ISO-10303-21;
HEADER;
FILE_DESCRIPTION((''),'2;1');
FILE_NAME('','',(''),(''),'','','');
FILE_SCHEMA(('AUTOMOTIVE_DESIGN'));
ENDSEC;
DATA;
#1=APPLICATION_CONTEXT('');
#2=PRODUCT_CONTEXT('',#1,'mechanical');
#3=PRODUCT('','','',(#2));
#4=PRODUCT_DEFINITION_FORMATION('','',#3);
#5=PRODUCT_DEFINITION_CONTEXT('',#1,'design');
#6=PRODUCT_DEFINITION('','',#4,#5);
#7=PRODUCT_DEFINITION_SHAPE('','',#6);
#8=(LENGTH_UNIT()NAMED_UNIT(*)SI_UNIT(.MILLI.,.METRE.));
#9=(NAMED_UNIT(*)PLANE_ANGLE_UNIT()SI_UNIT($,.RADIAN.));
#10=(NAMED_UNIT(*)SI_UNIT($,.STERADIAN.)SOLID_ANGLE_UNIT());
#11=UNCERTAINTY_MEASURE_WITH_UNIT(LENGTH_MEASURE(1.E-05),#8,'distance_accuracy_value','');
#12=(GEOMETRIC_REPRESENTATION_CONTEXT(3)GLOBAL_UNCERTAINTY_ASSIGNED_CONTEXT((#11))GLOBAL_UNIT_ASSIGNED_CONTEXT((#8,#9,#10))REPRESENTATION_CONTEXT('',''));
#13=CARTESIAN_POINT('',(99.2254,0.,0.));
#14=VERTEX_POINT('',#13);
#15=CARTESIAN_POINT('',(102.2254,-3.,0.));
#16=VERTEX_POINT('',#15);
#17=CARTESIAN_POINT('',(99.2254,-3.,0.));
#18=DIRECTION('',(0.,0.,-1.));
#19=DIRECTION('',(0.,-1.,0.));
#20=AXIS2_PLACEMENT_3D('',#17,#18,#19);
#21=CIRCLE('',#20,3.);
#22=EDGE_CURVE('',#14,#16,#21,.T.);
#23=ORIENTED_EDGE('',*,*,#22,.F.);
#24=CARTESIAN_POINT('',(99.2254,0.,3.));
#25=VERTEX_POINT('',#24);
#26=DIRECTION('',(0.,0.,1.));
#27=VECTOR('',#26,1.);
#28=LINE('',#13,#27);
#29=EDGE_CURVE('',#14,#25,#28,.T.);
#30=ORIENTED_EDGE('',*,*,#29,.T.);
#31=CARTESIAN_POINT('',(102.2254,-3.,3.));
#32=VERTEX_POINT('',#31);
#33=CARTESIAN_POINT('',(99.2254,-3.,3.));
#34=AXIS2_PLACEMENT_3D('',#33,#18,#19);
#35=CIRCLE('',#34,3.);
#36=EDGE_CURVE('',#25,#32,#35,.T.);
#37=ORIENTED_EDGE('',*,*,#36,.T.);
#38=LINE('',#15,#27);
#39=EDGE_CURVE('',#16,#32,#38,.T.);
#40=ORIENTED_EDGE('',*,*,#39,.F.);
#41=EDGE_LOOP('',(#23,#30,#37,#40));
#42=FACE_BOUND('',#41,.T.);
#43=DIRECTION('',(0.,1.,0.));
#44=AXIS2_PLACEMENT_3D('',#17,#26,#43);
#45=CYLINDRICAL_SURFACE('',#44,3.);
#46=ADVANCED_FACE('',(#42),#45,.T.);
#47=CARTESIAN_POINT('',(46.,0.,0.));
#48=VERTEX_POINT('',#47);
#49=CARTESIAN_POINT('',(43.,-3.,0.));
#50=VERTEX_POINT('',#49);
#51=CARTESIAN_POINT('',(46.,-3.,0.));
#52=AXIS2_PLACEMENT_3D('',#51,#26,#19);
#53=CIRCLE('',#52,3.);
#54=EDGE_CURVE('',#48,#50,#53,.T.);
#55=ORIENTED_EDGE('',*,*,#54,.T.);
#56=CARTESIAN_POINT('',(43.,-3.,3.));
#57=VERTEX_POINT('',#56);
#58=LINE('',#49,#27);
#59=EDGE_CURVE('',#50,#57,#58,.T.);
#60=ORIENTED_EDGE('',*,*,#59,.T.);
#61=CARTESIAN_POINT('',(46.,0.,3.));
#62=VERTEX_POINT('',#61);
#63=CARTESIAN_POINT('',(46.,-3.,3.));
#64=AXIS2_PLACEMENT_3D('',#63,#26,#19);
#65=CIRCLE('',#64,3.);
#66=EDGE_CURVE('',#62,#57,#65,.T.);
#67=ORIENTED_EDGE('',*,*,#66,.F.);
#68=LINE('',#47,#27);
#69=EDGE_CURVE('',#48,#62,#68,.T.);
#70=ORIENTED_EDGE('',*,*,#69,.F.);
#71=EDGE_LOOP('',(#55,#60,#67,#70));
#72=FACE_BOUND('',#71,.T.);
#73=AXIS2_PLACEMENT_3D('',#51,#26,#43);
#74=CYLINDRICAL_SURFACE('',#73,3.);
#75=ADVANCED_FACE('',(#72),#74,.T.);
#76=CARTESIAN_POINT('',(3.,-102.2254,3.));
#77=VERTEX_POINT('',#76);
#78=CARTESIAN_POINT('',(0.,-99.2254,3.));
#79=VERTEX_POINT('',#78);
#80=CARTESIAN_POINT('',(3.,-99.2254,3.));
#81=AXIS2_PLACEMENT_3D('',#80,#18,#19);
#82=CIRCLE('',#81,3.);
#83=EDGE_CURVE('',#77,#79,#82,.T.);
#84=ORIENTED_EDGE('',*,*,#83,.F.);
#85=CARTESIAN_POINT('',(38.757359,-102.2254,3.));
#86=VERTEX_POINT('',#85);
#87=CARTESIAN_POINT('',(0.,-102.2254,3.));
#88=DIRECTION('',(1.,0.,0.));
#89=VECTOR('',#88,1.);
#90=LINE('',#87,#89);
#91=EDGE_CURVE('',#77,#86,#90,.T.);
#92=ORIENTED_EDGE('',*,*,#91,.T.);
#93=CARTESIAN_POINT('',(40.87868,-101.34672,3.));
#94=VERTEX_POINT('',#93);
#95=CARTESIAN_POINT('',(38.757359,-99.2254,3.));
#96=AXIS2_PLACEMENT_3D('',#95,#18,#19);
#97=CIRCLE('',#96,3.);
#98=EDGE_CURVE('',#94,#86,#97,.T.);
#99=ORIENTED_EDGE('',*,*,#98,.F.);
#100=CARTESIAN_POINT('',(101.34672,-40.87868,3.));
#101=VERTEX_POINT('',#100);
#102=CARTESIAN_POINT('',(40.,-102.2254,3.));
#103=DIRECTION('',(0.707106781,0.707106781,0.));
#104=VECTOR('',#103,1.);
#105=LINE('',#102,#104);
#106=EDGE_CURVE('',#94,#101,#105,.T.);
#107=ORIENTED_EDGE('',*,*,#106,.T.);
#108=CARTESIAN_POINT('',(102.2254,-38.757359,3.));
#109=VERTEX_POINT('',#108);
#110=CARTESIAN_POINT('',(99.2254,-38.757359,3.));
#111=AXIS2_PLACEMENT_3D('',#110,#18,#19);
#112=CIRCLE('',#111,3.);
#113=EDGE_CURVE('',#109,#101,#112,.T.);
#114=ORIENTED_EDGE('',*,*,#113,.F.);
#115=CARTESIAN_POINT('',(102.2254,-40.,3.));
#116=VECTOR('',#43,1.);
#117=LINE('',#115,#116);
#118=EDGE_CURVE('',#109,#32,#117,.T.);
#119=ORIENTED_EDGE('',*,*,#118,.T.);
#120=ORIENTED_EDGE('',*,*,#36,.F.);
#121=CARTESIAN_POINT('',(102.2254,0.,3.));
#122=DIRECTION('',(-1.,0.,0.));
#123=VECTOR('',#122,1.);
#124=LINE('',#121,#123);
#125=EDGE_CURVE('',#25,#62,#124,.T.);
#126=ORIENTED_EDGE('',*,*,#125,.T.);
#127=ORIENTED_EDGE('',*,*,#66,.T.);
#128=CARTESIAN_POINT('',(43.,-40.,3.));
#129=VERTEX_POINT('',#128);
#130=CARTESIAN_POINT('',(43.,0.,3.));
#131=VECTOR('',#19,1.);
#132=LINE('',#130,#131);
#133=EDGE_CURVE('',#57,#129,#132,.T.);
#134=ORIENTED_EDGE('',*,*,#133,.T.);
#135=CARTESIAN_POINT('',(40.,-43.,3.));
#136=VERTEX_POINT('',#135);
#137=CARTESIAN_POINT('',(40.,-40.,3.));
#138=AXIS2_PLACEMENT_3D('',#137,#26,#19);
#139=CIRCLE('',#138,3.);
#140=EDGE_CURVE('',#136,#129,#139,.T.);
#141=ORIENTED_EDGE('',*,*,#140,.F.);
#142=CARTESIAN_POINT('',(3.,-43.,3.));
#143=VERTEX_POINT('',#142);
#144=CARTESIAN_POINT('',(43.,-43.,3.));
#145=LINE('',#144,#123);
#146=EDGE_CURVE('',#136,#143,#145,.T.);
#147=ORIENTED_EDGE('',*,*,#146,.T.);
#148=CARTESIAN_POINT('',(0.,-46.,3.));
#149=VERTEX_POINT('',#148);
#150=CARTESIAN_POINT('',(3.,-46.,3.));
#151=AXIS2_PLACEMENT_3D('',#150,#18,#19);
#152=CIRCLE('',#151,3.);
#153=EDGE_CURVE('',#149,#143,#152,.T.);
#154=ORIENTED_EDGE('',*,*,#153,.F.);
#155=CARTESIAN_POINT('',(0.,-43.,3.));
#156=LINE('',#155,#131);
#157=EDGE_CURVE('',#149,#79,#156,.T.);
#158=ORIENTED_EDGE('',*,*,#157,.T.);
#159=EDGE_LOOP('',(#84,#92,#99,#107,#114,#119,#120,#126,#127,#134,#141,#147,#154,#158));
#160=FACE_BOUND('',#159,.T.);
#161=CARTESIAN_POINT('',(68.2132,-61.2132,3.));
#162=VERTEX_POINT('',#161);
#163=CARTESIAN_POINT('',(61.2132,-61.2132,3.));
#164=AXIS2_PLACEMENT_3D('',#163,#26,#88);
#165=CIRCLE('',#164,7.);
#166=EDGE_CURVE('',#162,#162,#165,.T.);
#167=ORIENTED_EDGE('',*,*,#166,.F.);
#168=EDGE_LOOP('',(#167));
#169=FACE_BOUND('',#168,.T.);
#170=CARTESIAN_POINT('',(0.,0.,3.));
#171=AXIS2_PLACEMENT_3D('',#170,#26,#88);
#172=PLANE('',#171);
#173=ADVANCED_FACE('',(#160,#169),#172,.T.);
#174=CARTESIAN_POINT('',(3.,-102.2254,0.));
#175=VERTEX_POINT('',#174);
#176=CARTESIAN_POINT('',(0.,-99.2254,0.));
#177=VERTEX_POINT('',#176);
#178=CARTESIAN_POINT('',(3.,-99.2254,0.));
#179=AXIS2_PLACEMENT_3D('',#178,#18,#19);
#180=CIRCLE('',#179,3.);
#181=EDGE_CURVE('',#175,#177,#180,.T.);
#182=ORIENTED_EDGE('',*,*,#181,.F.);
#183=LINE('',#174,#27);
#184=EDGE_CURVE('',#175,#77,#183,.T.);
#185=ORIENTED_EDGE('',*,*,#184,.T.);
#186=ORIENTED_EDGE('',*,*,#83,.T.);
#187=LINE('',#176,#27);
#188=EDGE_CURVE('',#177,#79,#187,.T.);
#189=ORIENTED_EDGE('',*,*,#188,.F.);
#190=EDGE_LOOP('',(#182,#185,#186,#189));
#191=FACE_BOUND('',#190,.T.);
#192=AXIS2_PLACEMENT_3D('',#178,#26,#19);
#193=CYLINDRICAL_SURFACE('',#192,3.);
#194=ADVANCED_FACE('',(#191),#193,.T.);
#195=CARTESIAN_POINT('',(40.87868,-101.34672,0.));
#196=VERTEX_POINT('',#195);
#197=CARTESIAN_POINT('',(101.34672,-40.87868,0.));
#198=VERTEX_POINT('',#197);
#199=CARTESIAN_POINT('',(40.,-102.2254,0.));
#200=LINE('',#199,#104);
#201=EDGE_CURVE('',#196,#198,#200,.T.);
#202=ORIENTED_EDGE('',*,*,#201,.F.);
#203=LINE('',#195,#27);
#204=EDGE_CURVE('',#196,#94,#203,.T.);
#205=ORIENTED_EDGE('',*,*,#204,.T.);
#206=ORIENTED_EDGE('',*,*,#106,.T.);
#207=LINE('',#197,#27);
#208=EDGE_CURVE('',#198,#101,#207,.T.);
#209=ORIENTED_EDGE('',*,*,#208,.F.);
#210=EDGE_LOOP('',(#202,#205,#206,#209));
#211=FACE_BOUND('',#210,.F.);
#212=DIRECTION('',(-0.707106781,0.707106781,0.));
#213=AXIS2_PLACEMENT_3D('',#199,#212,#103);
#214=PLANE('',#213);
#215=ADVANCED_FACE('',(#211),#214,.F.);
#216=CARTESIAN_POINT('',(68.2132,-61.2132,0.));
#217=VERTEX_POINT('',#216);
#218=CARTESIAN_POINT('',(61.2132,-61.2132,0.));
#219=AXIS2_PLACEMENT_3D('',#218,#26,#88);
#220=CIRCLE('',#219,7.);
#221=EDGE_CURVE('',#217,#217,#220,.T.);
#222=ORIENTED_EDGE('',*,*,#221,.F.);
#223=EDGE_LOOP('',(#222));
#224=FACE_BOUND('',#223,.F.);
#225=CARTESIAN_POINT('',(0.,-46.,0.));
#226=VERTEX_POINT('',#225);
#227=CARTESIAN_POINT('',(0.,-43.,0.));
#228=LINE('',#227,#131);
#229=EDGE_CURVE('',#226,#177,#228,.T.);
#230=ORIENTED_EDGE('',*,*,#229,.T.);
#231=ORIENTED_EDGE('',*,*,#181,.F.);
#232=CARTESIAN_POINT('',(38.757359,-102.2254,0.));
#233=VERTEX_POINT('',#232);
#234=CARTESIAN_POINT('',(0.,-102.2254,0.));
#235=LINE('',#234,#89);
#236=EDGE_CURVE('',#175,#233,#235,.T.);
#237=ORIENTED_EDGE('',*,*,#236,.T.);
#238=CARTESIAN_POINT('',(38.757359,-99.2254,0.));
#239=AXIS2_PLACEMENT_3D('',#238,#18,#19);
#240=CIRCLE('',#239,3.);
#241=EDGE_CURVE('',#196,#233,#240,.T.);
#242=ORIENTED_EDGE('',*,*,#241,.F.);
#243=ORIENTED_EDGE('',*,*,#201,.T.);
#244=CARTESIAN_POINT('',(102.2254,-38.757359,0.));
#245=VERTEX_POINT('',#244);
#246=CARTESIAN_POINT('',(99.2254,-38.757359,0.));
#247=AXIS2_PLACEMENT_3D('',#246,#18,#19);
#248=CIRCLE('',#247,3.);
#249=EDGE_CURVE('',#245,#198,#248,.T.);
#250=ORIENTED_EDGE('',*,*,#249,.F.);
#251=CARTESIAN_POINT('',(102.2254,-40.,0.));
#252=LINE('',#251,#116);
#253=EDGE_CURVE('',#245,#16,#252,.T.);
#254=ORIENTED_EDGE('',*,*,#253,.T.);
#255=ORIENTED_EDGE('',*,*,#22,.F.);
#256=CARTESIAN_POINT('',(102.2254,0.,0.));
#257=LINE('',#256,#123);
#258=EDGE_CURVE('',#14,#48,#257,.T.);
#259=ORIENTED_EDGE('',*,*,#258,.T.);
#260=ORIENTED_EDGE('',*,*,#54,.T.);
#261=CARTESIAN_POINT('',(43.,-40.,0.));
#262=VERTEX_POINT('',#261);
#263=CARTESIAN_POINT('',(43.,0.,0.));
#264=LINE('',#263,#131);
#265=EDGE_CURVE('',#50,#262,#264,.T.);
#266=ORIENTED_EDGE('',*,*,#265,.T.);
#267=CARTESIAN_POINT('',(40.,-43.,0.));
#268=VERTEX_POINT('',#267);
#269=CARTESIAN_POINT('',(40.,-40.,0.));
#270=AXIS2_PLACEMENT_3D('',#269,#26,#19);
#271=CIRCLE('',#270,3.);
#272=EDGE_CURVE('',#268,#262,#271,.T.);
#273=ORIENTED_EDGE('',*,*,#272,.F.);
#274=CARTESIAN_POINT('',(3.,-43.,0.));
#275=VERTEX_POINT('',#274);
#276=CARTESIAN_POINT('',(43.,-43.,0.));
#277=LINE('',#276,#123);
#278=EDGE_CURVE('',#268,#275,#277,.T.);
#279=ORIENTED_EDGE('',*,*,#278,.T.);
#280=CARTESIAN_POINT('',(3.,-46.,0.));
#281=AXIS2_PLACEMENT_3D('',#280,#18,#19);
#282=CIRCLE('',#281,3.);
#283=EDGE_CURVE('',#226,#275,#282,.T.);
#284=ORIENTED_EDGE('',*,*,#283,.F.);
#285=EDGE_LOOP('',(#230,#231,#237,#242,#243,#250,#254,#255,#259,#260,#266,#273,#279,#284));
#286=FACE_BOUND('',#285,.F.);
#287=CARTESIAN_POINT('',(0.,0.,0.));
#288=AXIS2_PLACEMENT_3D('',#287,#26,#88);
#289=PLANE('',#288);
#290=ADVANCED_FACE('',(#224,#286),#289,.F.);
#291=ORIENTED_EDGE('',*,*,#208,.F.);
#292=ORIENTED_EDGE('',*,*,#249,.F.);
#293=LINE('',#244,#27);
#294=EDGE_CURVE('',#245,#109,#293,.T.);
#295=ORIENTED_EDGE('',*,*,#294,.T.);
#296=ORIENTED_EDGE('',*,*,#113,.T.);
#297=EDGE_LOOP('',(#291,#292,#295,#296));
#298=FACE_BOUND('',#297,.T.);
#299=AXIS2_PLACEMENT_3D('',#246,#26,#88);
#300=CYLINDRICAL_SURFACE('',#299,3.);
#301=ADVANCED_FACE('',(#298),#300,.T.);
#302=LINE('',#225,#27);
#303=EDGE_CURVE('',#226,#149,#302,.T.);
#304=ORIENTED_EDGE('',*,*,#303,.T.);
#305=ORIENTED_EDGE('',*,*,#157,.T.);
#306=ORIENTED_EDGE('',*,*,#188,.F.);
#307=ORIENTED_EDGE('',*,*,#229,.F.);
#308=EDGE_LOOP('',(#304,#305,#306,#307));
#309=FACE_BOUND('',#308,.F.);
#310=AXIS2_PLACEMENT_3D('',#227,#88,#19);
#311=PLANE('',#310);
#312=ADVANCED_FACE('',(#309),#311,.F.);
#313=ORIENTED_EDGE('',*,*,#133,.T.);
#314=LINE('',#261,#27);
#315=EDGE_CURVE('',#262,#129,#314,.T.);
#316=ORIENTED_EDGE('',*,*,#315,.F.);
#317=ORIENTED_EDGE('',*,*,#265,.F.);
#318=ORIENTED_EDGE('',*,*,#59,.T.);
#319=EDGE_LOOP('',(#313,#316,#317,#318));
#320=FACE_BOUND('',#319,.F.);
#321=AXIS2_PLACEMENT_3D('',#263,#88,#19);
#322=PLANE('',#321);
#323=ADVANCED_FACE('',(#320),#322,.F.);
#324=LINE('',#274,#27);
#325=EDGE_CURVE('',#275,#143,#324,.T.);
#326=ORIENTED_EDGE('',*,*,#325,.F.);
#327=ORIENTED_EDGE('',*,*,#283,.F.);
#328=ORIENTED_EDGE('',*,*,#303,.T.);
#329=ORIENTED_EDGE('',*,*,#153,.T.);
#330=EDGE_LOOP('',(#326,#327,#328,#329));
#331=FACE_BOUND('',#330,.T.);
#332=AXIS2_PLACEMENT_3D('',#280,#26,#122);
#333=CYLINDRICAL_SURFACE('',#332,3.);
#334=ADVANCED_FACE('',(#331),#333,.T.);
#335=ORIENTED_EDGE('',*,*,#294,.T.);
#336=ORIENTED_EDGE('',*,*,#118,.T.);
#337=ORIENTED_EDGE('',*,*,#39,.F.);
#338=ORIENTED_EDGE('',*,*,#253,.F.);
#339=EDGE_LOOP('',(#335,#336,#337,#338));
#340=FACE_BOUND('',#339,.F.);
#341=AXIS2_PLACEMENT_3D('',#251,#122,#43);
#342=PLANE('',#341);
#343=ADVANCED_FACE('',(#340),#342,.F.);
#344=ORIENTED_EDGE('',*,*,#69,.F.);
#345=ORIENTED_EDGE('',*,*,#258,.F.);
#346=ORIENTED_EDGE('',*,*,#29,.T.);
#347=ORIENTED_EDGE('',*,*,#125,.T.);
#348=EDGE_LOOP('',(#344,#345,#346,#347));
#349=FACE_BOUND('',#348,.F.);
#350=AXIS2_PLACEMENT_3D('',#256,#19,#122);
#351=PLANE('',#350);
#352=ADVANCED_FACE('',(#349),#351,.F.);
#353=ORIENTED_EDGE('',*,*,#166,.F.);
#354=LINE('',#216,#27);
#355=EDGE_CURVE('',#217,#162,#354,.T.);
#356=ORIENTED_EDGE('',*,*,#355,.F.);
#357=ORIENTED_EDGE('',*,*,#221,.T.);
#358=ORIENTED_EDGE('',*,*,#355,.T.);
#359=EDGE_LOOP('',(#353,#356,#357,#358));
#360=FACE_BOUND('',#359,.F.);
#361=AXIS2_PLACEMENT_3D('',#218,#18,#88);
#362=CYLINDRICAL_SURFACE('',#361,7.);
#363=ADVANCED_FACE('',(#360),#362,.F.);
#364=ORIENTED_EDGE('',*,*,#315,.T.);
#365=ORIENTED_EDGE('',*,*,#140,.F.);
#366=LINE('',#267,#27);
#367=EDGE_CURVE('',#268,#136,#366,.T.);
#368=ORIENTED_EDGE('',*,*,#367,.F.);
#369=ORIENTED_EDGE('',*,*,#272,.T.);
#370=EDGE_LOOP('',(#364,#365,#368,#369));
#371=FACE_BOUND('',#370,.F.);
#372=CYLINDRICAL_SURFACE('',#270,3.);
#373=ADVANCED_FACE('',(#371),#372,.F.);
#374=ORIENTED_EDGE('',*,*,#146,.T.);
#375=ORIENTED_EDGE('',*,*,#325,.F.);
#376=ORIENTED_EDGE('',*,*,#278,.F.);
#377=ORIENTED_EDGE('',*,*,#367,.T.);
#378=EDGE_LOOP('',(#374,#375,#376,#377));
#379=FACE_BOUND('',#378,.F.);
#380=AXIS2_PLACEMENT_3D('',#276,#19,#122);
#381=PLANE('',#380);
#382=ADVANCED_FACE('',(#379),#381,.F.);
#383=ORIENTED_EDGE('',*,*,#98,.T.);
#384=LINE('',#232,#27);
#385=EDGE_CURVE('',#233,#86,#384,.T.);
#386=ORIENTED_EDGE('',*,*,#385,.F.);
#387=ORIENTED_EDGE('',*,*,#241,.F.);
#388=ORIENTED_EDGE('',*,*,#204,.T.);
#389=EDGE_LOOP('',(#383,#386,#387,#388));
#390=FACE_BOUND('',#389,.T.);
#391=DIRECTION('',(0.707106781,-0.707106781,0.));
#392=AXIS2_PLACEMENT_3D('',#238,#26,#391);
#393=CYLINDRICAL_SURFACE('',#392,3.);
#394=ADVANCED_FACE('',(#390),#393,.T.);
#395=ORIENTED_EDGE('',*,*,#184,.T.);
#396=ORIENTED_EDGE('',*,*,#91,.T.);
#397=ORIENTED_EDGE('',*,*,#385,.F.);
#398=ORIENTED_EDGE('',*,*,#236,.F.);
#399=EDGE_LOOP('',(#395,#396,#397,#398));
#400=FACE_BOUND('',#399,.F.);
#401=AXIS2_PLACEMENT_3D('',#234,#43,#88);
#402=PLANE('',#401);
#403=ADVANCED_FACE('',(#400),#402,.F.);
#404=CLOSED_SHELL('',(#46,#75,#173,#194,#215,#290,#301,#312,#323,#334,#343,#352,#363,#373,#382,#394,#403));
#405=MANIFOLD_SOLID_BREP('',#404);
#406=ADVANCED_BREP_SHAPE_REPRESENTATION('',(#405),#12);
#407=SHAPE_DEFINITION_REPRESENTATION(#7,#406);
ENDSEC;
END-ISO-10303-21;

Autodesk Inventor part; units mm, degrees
ref_plane "YZ Plane" through (0, 0, 0) normal (1, 0, 0) x (0, 1, 0)
ref_plane "XZ Plane" through (0, 0, 0) normal (0, 1, 0) x (-1, 0, 0)
ref_plane "XY Plane" through (0, 0, 0) normal (0, 0, 1) x (1, 0, 0)
sketch "Sketch2" plane through (0, 0, 0) normal (0, 0, 1) x (1, 0, 0)
  line L0 (0, 0) -> (40, 0) construction
  line L1 (40, 0) -> (40, -40) construction
  line L2 (40, -40) -> (0, -40) construction
  line L3 (0, -40) -> (0, 0) construction
  line L4 (43, 0) -> (43, -43)
  line L5 (43, -43) -> (0, -43)
  line L6 (0, -43) -> (0, -102.2254)
  line L7 (0, -102.2254) -> (40, -102.2254)
  line L8 (40, -102.2254) -> (102.2254, -40)
  line L9 (102.2254, -40) -> (102.2254, 0)
  line L10 (102.2254, 0) -> (43, 0)
  line L11 (43, -43) -> (71.1127, -71.1127) construction
  circle A0 centre (61.2132, -61.2132) radius 7
  dimension "d7" = 40
  dimension "d8" = 40
  dimension "d9" = 3
  dimension "d10" = 3
  dimension "d11" = 14
  dimension "d12" = 30
  dimension "d13" = 14
extrude "Plate2" add sketch "Sketch2" along normal blind 3
fillet "Corner Round3" radius 3 7 edges at (0, -102.2254, 1.5) (0, -43, 1.5) (43, -43, 1.5) (43, 0, 1.5) (102.2254, 0, 1.5) (102.2254, -40, 1.5) (40, -102.2254, 1.5)
feature "Corner Round4" [suppressed]
sketch "Sketch3" plane through (43, -103.468, 3) normal (-0.7071068, 0.7071068, 0) x (-0.7071068, -0.7071068, 0)
  line L0 (-85.5147, 0) -> (0, 0)
  line L1 (0, 0) -> (0, -20)
  line L2 (0, -20) -> (-85.5147, -20)
  line L3 (-85.5147, -20) -> (-85.5147, 0)
equation "\"d8\" = d7"
equation "\"d10\" = d9"
equation "\"d13\" = d11"
equation "\"d14\" = Thickness"
equation "\"BendReliefWidth\" = Thickness"
equation "\"BendReliefDepth\" = 0.5 * Thickness"
equation "\"CornerReliefSize\" = 4 * Thickness"
equation "\"MinimumRemnant\" = 2 * Thickness"
equation "\"TransitionRadius\" = BendRadius"
equation "\"JacobiRadiusSize\" = BendRadius"
equation "\"GapSize\" = Thickness"
equation "\"Thickness\" = 3"
equation "\"BendRadius\" = 5"
properties part number "GNH 081 leg support" material "Stainless Steel"
